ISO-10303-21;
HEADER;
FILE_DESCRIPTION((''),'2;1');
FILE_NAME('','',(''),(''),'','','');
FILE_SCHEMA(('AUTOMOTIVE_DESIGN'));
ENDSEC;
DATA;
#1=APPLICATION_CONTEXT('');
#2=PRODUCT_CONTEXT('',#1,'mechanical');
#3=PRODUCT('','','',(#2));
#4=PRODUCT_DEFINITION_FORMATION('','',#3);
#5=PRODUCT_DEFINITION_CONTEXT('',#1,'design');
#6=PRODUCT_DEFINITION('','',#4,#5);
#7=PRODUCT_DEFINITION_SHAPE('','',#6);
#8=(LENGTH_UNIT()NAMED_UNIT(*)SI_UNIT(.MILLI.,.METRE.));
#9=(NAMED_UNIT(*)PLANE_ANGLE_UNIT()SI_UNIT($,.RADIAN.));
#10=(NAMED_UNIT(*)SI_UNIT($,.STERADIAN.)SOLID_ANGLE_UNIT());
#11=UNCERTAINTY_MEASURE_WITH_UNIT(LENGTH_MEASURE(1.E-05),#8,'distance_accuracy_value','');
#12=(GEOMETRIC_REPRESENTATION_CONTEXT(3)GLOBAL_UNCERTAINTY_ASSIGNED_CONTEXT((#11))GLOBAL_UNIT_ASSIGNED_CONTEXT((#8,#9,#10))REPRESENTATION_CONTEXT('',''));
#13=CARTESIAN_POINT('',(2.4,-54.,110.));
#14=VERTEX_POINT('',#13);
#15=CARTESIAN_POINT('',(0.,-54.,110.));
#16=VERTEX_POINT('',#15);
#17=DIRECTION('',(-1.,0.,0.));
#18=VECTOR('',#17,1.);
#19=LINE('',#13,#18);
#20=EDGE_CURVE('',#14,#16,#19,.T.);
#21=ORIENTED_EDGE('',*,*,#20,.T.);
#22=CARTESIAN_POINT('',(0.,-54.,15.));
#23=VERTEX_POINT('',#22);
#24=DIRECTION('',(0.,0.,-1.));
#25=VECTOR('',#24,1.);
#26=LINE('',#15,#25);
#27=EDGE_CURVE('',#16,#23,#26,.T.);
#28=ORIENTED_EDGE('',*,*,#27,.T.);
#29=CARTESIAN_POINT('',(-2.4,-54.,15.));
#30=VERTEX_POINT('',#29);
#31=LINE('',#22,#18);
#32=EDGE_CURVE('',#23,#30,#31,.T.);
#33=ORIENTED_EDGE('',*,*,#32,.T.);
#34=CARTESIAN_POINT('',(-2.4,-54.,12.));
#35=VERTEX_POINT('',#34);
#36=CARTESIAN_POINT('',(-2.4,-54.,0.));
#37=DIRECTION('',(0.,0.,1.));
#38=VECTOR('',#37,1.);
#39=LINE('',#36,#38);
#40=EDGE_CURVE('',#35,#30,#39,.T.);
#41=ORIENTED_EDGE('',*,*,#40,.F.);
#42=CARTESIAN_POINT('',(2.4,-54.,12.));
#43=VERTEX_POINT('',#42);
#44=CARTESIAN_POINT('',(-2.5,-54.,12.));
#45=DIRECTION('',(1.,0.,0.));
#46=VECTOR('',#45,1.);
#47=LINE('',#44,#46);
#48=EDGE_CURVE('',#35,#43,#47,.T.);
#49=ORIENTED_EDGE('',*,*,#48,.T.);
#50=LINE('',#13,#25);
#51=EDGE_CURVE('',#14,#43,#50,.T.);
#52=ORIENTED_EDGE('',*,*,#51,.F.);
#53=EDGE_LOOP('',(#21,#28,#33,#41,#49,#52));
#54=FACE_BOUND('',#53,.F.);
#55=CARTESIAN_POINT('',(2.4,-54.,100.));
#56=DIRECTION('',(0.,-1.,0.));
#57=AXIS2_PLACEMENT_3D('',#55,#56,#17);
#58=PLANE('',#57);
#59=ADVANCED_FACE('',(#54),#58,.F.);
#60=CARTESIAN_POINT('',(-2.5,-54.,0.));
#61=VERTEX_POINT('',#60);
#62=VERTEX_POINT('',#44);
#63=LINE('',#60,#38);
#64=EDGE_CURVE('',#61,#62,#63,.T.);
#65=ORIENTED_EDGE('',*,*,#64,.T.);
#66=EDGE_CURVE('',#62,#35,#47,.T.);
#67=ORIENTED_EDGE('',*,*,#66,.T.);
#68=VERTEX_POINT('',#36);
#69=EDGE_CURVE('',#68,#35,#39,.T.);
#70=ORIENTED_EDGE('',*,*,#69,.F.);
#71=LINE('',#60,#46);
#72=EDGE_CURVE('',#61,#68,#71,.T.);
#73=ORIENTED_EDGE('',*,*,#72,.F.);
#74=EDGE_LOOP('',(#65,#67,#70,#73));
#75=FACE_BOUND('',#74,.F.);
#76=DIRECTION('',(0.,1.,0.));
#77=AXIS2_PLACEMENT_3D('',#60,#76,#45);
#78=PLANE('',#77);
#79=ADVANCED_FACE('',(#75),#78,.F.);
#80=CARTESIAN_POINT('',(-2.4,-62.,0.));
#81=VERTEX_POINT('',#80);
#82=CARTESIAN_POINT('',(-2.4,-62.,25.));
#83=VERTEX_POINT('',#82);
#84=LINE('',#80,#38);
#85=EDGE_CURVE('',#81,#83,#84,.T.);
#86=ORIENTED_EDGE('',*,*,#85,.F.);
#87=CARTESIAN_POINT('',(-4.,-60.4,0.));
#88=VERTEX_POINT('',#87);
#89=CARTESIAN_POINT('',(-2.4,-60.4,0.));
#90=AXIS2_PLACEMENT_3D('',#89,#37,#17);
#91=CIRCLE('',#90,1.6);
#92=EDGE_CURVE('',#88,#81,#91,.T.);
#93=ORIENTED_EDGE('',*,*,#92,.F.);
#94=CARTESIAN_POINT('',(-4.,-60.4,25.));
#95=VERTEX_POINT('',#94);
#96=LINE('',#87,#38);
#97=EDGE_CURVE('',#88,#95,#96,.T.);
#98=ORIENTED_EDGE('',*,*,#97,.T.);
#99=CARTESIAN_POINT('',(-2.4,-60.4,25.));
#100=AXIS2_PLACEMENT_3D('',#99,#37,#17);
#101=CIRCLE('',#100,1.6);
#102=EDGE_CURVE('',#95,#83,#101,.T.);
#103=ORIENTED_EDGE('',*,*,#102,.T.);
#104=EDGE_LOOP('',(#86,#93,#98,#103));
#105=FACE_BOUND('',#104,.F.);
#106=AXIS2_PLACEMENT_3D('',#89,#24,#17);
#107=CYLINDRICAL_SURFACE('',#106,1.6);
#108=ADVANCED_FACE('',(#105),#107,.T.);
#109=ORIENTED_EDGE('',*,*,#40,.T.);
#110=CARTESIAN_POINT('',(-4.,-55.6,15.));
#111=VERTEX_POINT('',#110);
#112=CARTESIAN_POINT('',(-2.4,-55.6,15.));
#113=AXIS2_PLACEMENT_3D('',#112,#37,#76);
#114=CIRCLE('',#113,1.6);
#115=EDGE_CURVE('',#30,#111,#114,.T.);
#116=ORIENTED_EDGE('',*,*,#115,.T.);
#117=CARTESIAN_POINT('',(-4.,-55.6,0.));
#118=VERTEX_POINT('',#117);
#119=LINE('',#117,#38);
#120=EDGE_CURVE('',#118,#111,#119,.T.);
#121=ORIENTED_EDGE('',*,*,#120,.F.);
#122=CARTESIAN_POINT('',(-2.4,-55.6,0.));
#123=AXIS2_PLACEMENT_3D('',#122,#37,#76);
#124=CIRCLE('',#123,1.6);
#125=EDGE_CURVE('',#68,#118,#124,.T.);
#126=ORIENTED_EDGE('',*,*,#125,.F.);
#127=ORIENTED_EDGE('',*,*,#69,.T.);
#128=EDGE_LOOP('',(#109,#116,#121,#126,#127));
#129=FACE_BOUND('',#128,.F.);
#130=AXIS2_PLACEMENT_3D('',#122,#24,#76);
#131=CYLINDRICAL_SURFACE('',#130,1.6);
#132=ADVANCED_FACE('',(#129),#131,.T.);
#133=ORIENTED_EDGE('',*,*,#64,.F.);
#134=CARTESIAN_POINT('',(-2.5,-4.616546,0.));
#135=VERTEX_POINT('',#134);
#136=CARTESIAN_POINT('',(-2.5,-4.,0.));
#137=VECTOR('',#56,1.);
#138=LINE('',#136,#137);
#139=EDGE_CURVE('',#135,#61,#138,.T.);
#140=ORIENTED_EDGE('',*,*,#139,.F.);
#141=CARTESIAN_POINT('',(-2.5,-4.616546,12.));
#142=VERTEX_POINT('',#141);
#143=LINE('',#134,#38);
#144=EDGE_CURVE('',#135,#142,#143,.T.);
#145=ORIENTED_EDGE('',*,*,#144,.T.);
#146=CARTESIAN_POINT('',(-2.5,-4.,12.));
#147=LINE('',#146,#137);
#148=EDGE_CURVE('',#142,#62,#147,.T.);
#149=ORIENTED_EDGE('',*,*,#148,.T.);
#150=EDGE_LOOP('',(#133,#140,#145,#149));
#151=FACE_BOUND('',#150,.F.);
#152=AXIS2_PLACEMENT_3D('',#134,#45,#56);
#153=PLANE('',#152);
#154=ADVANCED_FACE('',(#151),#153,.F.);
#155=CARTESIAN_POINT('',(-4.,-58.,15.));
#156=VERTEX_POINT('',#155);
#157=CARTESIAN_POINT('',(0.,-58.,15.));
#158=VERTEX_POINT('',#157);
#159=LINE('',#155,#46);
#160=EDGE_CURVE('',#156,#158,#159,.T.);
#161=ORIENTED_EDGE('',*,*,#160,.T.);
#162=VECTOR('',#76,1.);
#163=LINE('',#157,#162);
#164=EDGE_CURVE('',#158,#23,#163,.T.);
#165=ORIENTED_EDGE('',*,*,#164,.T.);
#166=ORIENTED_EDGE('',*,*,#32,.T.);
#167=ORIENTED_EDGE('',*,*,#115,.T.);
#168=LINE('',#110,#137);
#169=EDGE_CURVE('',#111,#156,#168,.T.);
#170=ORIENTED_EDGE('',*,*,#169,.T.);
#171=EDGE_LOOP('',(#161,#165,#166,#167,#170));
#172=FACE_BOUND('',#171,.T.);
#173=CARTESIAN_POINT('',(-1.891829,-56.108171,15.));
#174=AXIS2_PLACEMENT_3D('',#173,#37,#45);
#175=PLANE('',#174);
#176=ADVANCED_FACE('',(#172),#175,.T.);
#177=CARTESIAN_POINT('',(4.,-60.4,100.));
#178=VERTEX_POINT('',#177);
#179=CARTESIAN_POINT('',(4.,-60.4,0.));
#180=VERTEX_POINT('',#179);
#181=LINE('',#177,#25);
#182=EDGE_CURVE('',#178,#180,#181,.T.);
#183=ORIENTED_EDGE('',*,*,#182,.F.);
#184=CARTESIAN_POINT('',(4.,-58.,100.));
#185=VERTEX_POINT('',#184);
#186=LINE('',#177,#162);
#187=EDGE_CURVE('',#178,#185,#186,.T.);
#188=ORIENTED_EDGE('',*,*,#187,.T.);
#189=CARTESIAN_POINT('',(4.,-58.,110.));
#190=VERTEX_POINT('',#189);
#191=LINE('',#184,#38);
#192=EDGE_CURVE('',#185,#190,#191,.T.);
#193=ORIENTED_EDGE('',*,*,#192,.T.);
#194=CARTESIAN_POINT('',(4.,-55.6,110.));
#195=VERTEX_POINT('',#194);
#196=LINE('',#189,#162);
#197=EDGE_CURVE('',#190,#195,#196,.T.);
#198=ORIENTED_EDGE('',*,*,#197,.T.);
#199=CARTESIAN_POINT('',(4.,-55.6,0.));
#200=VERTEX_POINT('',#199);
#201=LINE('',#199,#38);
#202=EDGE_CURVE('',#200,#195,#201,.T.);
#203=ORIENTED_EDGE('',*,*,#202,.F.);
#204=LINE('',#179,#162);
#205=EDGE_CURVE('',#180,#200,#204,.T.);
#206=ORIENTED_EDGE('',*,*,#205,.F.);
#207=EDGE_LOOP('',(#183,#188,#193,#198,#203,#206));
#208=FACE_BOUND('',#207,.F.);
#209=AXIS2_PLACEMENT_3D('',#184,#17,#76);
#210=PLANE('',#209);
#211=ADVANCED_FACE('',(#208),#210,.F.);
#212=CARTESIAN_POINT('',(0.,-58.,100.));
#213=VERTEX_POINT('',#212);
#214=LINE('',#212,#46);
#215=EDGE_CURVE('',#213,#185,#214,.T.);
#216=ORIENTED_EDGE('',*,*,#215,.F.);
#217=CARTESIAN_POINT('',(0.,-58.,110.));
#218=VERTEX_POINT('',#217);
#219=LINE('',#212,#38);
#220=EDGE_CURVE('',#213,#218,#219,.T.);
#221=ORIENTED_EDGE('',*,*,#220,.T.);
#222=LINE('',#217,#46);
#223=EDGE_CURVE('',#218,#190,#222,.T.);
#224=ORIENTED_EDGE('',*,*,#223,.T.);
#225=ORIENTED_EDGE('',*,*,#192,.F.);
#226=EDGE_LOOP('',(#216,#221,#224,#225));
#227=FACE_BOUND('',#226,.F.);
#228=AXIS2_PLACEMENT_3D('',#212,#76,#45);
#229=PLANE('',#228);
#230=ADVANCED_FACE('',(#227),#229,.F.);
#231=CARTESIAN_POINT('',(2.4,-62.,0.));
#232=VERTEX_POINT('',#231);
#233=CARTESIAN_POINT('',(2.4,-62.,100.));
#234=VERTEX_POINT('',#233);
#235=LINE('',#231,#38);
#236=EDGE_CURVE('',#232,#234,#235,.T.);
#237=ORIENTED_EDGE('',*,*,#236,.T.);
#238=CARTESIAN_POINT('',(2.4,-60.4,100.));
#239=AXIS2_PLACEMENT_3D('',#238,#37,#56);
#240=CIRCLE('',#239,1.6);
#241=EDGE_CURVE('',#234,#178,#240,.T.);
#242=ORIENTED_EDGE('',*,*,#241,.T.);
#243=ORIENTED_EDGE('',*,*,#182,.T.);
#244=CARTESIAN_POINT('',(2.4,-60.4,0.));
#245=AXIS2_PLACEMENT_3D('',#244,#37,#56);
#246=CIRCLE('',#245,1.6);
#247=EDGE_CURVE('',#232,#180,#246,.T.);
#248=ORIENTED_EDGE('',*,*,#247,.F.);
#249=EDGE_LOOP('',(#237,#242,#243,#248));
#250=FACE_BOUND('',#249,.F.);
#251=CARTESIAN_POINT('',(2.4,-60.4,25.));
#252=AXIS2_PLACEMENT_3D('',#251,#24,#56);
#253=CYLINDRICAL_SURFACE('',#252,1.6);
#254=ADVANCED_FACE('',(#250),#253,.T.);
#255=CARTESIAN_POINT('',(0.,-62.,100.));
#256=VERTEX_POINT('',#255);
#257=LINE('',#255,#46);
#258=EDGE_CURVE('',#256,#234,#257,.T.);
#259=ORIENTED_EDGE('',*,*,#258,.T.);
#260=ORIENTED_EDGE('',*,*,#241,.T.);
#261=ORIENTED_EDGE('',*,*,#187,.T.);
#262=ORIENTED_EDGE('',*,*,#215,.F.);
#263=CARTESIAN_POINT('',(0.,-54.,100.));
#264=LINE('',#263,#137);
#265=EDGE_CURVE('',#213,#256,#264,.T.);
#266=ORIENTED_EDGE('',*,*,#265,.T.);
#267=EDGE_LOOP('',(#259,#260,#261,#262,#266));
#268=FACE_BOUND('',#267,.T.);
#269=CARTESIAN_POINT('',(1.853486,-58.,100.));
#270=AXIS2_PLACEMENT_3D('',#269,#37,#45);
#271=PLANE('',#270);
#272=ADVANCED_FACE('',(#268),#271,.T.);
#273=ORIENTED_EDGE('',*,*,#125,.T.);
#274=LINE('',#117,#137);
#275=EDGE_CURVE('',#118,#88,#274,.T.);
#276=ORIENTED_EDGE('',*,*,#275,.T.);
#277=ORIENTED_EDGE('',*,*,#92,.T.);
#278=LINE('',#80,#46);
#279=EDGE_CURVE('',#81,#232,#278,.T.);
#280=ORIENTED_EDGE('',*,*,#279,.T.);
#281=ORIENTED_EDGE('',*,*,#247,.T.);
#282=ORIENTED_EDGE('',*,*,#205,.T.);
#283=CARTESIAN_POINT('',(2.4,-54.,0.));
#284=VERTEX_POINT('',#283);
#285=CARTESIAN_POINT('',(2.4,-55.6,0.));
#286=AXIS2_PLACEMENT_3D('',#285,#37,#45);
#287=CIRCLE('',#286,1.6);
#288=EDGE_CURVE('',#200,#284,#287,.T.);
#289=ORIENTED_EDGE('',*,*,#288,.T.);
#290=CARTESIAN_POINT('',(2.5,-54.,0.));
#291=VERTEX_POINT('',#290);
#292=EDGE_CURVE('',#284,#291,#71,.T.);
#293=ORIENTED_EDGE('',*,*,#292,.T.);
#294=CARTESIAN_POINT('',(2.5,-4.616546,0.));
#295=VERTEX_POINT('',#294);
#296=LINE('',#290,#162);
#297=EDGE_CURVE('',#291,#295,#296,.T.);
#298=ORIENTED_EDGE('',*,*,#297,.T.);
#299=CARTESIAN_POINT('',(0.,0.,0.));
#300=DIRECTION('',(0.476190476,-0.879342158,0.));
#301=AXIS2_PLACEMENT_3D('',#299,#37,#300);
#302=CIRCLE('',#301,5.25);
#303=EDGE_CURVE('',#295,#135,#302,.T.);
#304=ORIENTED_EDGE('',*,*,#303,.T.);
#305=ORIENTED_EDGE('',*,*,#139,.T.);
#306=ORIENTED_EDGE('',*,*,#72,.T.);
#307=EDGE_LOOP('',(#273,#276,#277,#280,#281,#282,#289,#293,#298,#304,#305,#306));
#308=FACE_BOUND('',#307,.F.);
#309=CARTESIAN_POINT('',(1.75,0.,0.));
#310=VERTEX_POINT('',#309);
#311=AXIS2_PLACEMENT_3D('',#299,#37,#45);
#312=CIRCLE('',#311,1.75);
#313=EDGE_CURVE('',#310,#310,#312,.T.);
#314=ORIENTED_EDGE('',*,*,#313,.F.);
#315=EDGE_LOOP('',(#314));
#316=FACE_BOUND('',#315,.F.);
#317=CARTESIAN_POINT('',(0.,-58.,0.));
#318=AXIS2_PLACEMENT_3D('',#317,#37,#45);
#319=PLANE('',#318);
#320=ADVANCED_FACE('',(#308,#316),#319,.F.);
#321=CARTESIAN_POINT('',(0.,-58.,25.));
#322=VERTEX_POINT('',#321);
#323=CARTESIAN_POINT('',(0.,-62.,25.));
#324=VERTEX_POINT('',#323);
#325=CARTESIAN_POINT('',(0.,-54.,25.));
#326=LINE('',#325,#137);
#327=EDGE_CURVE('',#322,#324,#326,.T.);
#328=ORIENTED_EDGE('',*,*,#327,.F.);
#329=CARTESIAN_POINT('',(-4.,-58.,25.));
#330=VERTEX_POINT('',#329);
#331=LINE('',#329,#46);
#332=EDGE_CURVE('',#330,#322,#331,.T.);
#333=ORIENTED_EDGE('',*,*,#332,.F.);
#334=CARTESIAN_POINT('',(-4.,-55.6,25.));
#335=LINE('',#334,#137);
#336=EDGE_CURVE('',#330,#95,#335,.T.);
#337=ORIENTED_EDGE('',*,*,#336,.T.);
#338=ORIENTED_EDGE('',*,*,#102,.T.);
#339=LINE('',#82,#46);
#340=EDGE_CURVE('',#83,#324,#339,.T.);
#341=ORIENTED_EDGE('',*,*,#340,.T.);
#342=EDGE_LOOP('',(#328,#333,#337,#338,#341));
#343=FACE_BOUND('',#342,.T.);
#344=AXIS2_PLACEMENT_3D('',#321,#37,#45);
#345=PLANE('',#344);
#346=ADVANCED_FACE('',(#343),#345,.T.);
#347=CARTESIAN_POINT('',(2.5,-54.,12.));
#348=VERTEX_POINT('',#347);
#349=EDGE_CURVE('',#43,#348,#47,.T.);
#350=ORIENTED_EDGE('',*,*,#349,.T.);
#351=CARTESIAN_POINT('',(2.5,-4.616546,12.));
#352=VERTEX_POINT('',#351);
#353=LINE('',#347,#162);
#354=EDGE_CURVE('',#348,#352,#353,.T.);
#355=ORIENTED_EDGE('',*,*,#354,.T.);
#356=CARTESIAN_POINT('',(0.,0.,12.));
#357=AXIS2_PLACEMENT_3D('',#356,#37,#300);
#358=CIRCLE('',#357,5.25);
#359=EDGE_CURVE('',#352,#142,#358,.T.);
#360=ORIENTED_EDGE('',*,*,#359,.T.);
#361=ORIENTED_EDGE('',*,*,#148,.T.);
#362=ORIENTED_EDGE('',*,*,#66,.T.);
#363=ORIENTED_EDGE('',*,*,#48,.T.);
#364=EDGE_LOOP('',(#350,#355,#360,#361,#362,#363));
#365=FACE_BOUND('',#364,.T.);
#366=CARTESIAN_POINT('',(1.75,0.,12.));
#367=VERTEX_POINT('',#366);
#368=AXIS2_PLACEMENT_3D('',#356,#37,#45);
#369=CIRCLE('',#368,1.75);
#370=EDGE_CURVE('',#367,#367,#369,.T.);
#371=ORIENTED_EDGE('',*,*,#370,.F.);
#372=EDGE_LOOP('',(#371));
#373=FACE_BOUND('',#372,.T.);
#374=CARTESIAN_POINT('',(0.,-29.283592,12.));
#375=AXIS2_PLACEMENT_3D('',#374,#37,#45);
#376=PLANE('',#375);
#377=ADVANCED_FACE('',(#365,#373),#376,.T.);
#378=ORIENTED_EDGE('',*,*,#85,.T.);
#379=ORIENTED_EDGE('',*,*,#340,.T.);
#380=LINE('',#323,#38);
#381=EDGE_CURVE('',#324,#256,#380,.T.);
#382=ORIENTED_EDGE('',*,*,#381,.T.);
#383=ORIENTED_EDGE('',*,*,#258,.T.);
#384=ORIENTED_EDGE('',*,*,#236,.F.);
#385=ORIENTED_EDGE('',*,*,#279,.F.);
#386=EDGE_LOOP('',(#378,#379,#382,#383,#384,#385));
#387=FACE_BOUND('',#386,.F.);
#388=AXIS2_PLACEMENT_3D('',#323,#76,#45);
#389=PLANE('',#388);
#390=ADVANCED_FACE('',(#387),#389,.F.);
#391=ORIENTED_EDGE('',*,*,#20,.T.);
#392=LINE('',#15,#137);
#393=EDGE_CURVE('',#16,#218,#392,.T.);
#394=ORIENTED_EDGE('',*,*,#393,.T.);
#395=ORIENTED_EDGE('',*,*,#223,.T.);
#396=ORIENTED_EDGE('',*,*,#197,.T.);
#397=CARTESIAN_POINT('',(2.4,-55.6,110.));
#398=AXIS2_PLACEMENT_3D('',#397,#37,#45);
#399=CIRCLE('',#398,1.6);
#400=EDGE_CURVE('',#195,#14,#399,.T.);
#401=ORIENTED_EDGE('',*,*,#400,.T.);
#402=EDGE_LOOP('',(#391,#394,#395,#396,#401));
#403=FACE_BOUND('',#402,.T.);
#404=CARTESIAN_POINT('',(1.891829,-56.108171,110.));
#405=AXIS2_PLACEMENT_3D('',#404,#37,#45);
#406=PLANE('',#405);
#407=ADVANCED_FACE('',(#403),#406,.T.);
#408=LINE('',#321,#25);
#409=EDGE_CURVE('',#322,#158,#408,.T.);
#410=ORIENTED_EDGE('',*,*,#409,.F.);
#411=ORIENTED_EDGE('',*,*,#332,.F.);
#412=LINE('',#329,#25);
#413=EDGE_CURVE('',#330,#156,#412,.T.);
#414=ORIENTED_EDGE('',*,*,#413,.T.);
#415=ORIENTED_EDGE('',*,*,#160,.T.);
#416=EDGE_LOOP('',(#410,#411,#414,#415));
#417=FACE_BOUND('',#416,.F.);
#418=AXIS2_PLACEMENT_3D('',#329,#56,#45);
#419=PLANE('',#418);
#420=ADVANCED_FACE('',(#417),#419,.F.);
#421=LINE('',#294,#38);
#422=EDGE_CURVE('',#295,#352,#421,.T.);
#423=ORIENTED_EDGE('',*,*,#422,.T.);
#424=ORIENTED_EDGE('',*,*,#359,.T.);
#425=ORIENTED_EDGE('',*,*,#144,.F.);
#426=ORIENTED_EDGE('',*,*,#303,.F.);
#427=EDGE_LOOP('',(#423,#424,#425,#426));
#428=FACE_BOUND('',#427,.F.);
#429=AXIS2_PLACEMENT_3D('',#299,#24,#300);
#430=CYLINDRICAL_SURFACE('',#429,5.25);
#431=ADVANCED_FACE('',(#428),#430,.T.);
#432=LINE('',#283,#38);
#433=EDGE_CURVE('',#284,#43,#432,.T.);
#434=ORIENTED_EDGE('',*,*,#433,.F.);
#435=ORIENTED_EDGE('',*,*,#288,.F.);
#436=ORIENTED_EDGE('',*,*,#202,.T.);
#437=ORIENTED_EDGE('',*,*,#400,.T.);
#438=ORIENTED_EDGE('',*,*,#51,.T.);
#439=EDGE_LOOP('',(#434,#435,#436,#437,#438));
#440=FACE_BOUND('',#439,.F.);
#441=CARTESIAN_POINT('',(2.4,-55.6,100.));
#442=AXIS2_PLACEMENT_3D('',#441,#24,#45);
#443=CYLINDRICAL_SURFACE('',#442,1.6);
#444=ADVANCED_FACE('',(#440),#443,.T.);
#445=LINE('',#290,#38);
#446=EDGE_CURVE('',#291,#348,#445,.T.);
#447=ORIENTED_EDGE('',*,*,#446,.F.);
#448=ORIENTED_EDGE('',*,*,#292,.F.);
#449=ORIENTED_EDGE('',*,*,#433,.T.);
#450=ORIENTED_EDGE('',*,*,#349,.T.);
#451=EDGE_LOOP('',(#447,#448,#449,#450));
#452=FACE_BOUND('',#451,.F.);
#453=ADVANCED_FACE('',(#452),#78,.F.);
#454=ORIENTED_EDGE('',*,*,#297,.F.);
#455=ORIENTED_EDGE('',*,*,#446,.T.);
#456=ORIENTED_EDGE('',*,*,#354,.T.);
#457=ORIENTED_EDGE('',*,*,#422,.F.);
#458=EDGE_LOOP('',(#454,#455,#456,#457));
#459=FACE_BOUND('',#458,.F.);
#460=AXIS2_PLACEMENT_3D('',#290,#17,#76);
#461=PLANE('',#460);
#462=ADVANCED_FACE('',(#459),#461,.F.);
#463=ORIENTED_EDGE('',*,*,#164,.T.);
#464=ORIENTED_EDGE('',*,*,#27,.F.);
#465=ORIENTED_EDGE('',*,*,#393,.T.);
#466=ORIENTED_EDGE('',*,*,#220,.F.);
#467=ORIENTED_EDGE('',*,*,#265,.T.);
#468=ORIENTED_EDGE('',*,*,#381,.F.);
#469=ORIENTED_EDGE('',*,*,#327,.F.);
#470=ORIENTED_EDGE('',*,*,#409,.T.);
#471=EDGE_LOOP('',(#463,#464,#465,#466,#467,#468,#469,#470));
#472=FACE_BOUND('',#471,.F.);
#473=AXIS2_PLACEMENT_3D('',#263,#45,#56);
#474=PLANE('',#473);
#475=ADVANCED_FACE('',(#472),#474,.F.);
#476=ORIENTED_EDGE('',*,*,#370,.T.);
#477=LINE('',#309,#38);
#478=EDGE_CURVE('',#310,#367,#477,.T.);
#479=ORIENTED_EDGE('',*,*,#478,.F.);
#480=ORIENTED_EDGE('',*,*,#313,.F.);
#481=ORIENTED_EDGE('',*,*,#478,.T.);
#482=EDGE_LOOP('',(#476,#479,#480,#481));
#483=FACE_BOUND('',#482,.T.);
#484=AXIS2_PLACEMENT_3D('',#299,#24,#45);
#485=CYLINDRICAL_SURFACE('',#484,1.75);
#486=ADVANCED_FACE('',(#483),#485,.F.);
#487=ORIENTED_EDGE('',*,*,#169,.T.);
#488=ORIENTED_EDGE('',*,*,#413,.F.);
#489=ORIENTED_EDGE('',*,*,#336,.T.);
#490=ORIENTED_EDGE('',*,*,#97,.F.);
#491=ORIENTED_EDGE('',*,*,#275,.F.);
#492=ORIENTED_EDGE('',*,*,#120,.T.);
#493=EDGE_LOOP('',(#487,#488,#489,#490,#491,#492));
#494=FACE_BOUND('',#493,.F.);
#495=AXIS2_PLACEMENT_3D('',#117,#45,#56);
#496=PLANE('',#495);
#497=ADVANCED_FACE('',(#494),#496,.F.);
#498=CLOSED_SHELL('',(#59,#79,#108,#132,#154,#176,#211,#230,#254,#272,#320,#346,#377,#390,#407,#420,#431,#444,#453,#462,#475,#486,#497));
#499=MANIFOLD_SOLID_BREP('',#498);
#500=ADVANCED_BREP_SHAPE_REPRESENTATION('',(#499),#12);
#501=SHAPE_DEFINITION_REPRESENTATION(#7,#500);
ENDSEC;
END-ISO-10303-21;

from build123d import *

# Parameters (mm, degrees)
F0_R     = 1.75
F1_DEPTH = 12
F2_DEPTH = 25
F4_DEPTH = 75
F6_DEPTH = 10
F8_DEPTH = 10


# Not quite as in the source:
# - a feature names something its author has since deleted; it is built from what else it names


with BuildPart() as f1:
    # F0 (on Top) → F1 (new body)
    with BuildSketch(Plane.XY):
        with BuildLine():
            ThreePointArc((2.5, -4.6165463282), (0, -5.25), (-2.5, -4.6165463282))
            Line((-2.5, -4.6165463282), (-2.5, -54))
            Line((-2.5, -54), (-2.4, -54))
            Line((-2.4, -54), (2.4, -54))
            Line((2.4, -54), (2.5, -54))
            Line((2.5, -54), (2.5, -4.6165463282))
        make_face()
        with BuildLine():
            Line((-2.5, -4), (-2.5, -4.6165463282))
            ThreePointArc((-2.5, -4.6165463282), (0, -5.25), (2.5, -4.6165463282))
            Line((2.5, -4.6165463282), (2.5, -4))
            Line((2.5, -4), (-2.5, -4))
        make_face()
        with BuildLine():
            ThreePointArc((2.5, -4.6165463282), (4.5104046382, -2.6867731575), (5.25, 0))
            ThreePointArc((5.25, 0), (-2.6867731575, 4.5104046382), (-2.5, -4.6165463282))
            Line((-2.5, -4.6165463282), (-2.5, -4))
            Line((-2.5, -4), (2.5, -4))
            Line((2.5, -4), (2.5, -4.6165463282))
        make_face()
        Circle(F0_R, mode=Mode.SUBTRACT)
    extrude(amount=F1_DEPTH)

    # F0 (on Top) → F2 (join)
    with BuildSketch(Plane.XY):
        with BuildLine():
            Line((2.4, -54), (-2.4, -54))
            ThreePointArc((-2.4, -54), (-3.5313708499, -54.4686291501), (-4, -55.6))
            Line((-4, -55.6), (-4, -60.4))
            ThreePointArc((-4, -60.4), (-3.5313708499, -61.5313708499), (-2.4, -62))
            Line((-2.4, -62), (2.4, -62))
            ThreePointArc((2.4, -62), (3.5313708499, -61.5313708499), (4, -60.4))
            Line((4, -60.4), (4, -55.6))
            ThreePointArc((4, -55.6), (3.5313708499, -54.4686291501), (2.4, -54))
        make_face()
    extrude(amount=F2_DEPTH)

    # F3 (on face) → F4 (join)
    with BuildSketch(Plane.XY.offset(25)):
        with BuildLine():
            Line((2.4, -54), (0, -54))
            Line((0, -54), (0, -62))
            Line((0, -62), (2.4, -62))
            ThreePointArc((2.4, -62), (3.5313708499, -61.5313708499), (4, -60.4))
            Line((4, -60.4), (4, -55.6))
            ThreePointArc((4, -55.6), (3.5313708499, -54.4686291501), (2.4, -54))
        make_face()
    extrude(amount=F4_DEPTH)

    # F5 (on face) → F6 (cut)
    with BuildSketch(Plane.XY.offset(25)):
        with BuildLine():
            Line((-4, -58), (0, -58))
            Line((0, -58), (0, -54))
            Line((0, -54), (-2.4, -54))
            ThreePointArc((-2.4, -54), (-3.5313708499, -54.4686291501), (-4, -55.6))
            Line((-4, -55.6), (-4, -58))
        make_face()
    extrude(amount=-F6_DEPTH, mode=Mode.SUBTRACT)

    # F7 (on face) → F8 (join)
    with BuildSketch(Plane.XY.offset(100)):
        with BuildLine():
            Line((0, -58), (4, -58))
            Line((4, -58), (4, -55.6))
            ThreePointArc((4, -55.6), (3.5313708499, -54.4686291501), (2.4, -54))
            Line((2.4, -54), (0, -54))
            Line((0, -54), (0, -58))
        make_face()
    extrude(amount=F8_DEPTH)


solid = f1.part
